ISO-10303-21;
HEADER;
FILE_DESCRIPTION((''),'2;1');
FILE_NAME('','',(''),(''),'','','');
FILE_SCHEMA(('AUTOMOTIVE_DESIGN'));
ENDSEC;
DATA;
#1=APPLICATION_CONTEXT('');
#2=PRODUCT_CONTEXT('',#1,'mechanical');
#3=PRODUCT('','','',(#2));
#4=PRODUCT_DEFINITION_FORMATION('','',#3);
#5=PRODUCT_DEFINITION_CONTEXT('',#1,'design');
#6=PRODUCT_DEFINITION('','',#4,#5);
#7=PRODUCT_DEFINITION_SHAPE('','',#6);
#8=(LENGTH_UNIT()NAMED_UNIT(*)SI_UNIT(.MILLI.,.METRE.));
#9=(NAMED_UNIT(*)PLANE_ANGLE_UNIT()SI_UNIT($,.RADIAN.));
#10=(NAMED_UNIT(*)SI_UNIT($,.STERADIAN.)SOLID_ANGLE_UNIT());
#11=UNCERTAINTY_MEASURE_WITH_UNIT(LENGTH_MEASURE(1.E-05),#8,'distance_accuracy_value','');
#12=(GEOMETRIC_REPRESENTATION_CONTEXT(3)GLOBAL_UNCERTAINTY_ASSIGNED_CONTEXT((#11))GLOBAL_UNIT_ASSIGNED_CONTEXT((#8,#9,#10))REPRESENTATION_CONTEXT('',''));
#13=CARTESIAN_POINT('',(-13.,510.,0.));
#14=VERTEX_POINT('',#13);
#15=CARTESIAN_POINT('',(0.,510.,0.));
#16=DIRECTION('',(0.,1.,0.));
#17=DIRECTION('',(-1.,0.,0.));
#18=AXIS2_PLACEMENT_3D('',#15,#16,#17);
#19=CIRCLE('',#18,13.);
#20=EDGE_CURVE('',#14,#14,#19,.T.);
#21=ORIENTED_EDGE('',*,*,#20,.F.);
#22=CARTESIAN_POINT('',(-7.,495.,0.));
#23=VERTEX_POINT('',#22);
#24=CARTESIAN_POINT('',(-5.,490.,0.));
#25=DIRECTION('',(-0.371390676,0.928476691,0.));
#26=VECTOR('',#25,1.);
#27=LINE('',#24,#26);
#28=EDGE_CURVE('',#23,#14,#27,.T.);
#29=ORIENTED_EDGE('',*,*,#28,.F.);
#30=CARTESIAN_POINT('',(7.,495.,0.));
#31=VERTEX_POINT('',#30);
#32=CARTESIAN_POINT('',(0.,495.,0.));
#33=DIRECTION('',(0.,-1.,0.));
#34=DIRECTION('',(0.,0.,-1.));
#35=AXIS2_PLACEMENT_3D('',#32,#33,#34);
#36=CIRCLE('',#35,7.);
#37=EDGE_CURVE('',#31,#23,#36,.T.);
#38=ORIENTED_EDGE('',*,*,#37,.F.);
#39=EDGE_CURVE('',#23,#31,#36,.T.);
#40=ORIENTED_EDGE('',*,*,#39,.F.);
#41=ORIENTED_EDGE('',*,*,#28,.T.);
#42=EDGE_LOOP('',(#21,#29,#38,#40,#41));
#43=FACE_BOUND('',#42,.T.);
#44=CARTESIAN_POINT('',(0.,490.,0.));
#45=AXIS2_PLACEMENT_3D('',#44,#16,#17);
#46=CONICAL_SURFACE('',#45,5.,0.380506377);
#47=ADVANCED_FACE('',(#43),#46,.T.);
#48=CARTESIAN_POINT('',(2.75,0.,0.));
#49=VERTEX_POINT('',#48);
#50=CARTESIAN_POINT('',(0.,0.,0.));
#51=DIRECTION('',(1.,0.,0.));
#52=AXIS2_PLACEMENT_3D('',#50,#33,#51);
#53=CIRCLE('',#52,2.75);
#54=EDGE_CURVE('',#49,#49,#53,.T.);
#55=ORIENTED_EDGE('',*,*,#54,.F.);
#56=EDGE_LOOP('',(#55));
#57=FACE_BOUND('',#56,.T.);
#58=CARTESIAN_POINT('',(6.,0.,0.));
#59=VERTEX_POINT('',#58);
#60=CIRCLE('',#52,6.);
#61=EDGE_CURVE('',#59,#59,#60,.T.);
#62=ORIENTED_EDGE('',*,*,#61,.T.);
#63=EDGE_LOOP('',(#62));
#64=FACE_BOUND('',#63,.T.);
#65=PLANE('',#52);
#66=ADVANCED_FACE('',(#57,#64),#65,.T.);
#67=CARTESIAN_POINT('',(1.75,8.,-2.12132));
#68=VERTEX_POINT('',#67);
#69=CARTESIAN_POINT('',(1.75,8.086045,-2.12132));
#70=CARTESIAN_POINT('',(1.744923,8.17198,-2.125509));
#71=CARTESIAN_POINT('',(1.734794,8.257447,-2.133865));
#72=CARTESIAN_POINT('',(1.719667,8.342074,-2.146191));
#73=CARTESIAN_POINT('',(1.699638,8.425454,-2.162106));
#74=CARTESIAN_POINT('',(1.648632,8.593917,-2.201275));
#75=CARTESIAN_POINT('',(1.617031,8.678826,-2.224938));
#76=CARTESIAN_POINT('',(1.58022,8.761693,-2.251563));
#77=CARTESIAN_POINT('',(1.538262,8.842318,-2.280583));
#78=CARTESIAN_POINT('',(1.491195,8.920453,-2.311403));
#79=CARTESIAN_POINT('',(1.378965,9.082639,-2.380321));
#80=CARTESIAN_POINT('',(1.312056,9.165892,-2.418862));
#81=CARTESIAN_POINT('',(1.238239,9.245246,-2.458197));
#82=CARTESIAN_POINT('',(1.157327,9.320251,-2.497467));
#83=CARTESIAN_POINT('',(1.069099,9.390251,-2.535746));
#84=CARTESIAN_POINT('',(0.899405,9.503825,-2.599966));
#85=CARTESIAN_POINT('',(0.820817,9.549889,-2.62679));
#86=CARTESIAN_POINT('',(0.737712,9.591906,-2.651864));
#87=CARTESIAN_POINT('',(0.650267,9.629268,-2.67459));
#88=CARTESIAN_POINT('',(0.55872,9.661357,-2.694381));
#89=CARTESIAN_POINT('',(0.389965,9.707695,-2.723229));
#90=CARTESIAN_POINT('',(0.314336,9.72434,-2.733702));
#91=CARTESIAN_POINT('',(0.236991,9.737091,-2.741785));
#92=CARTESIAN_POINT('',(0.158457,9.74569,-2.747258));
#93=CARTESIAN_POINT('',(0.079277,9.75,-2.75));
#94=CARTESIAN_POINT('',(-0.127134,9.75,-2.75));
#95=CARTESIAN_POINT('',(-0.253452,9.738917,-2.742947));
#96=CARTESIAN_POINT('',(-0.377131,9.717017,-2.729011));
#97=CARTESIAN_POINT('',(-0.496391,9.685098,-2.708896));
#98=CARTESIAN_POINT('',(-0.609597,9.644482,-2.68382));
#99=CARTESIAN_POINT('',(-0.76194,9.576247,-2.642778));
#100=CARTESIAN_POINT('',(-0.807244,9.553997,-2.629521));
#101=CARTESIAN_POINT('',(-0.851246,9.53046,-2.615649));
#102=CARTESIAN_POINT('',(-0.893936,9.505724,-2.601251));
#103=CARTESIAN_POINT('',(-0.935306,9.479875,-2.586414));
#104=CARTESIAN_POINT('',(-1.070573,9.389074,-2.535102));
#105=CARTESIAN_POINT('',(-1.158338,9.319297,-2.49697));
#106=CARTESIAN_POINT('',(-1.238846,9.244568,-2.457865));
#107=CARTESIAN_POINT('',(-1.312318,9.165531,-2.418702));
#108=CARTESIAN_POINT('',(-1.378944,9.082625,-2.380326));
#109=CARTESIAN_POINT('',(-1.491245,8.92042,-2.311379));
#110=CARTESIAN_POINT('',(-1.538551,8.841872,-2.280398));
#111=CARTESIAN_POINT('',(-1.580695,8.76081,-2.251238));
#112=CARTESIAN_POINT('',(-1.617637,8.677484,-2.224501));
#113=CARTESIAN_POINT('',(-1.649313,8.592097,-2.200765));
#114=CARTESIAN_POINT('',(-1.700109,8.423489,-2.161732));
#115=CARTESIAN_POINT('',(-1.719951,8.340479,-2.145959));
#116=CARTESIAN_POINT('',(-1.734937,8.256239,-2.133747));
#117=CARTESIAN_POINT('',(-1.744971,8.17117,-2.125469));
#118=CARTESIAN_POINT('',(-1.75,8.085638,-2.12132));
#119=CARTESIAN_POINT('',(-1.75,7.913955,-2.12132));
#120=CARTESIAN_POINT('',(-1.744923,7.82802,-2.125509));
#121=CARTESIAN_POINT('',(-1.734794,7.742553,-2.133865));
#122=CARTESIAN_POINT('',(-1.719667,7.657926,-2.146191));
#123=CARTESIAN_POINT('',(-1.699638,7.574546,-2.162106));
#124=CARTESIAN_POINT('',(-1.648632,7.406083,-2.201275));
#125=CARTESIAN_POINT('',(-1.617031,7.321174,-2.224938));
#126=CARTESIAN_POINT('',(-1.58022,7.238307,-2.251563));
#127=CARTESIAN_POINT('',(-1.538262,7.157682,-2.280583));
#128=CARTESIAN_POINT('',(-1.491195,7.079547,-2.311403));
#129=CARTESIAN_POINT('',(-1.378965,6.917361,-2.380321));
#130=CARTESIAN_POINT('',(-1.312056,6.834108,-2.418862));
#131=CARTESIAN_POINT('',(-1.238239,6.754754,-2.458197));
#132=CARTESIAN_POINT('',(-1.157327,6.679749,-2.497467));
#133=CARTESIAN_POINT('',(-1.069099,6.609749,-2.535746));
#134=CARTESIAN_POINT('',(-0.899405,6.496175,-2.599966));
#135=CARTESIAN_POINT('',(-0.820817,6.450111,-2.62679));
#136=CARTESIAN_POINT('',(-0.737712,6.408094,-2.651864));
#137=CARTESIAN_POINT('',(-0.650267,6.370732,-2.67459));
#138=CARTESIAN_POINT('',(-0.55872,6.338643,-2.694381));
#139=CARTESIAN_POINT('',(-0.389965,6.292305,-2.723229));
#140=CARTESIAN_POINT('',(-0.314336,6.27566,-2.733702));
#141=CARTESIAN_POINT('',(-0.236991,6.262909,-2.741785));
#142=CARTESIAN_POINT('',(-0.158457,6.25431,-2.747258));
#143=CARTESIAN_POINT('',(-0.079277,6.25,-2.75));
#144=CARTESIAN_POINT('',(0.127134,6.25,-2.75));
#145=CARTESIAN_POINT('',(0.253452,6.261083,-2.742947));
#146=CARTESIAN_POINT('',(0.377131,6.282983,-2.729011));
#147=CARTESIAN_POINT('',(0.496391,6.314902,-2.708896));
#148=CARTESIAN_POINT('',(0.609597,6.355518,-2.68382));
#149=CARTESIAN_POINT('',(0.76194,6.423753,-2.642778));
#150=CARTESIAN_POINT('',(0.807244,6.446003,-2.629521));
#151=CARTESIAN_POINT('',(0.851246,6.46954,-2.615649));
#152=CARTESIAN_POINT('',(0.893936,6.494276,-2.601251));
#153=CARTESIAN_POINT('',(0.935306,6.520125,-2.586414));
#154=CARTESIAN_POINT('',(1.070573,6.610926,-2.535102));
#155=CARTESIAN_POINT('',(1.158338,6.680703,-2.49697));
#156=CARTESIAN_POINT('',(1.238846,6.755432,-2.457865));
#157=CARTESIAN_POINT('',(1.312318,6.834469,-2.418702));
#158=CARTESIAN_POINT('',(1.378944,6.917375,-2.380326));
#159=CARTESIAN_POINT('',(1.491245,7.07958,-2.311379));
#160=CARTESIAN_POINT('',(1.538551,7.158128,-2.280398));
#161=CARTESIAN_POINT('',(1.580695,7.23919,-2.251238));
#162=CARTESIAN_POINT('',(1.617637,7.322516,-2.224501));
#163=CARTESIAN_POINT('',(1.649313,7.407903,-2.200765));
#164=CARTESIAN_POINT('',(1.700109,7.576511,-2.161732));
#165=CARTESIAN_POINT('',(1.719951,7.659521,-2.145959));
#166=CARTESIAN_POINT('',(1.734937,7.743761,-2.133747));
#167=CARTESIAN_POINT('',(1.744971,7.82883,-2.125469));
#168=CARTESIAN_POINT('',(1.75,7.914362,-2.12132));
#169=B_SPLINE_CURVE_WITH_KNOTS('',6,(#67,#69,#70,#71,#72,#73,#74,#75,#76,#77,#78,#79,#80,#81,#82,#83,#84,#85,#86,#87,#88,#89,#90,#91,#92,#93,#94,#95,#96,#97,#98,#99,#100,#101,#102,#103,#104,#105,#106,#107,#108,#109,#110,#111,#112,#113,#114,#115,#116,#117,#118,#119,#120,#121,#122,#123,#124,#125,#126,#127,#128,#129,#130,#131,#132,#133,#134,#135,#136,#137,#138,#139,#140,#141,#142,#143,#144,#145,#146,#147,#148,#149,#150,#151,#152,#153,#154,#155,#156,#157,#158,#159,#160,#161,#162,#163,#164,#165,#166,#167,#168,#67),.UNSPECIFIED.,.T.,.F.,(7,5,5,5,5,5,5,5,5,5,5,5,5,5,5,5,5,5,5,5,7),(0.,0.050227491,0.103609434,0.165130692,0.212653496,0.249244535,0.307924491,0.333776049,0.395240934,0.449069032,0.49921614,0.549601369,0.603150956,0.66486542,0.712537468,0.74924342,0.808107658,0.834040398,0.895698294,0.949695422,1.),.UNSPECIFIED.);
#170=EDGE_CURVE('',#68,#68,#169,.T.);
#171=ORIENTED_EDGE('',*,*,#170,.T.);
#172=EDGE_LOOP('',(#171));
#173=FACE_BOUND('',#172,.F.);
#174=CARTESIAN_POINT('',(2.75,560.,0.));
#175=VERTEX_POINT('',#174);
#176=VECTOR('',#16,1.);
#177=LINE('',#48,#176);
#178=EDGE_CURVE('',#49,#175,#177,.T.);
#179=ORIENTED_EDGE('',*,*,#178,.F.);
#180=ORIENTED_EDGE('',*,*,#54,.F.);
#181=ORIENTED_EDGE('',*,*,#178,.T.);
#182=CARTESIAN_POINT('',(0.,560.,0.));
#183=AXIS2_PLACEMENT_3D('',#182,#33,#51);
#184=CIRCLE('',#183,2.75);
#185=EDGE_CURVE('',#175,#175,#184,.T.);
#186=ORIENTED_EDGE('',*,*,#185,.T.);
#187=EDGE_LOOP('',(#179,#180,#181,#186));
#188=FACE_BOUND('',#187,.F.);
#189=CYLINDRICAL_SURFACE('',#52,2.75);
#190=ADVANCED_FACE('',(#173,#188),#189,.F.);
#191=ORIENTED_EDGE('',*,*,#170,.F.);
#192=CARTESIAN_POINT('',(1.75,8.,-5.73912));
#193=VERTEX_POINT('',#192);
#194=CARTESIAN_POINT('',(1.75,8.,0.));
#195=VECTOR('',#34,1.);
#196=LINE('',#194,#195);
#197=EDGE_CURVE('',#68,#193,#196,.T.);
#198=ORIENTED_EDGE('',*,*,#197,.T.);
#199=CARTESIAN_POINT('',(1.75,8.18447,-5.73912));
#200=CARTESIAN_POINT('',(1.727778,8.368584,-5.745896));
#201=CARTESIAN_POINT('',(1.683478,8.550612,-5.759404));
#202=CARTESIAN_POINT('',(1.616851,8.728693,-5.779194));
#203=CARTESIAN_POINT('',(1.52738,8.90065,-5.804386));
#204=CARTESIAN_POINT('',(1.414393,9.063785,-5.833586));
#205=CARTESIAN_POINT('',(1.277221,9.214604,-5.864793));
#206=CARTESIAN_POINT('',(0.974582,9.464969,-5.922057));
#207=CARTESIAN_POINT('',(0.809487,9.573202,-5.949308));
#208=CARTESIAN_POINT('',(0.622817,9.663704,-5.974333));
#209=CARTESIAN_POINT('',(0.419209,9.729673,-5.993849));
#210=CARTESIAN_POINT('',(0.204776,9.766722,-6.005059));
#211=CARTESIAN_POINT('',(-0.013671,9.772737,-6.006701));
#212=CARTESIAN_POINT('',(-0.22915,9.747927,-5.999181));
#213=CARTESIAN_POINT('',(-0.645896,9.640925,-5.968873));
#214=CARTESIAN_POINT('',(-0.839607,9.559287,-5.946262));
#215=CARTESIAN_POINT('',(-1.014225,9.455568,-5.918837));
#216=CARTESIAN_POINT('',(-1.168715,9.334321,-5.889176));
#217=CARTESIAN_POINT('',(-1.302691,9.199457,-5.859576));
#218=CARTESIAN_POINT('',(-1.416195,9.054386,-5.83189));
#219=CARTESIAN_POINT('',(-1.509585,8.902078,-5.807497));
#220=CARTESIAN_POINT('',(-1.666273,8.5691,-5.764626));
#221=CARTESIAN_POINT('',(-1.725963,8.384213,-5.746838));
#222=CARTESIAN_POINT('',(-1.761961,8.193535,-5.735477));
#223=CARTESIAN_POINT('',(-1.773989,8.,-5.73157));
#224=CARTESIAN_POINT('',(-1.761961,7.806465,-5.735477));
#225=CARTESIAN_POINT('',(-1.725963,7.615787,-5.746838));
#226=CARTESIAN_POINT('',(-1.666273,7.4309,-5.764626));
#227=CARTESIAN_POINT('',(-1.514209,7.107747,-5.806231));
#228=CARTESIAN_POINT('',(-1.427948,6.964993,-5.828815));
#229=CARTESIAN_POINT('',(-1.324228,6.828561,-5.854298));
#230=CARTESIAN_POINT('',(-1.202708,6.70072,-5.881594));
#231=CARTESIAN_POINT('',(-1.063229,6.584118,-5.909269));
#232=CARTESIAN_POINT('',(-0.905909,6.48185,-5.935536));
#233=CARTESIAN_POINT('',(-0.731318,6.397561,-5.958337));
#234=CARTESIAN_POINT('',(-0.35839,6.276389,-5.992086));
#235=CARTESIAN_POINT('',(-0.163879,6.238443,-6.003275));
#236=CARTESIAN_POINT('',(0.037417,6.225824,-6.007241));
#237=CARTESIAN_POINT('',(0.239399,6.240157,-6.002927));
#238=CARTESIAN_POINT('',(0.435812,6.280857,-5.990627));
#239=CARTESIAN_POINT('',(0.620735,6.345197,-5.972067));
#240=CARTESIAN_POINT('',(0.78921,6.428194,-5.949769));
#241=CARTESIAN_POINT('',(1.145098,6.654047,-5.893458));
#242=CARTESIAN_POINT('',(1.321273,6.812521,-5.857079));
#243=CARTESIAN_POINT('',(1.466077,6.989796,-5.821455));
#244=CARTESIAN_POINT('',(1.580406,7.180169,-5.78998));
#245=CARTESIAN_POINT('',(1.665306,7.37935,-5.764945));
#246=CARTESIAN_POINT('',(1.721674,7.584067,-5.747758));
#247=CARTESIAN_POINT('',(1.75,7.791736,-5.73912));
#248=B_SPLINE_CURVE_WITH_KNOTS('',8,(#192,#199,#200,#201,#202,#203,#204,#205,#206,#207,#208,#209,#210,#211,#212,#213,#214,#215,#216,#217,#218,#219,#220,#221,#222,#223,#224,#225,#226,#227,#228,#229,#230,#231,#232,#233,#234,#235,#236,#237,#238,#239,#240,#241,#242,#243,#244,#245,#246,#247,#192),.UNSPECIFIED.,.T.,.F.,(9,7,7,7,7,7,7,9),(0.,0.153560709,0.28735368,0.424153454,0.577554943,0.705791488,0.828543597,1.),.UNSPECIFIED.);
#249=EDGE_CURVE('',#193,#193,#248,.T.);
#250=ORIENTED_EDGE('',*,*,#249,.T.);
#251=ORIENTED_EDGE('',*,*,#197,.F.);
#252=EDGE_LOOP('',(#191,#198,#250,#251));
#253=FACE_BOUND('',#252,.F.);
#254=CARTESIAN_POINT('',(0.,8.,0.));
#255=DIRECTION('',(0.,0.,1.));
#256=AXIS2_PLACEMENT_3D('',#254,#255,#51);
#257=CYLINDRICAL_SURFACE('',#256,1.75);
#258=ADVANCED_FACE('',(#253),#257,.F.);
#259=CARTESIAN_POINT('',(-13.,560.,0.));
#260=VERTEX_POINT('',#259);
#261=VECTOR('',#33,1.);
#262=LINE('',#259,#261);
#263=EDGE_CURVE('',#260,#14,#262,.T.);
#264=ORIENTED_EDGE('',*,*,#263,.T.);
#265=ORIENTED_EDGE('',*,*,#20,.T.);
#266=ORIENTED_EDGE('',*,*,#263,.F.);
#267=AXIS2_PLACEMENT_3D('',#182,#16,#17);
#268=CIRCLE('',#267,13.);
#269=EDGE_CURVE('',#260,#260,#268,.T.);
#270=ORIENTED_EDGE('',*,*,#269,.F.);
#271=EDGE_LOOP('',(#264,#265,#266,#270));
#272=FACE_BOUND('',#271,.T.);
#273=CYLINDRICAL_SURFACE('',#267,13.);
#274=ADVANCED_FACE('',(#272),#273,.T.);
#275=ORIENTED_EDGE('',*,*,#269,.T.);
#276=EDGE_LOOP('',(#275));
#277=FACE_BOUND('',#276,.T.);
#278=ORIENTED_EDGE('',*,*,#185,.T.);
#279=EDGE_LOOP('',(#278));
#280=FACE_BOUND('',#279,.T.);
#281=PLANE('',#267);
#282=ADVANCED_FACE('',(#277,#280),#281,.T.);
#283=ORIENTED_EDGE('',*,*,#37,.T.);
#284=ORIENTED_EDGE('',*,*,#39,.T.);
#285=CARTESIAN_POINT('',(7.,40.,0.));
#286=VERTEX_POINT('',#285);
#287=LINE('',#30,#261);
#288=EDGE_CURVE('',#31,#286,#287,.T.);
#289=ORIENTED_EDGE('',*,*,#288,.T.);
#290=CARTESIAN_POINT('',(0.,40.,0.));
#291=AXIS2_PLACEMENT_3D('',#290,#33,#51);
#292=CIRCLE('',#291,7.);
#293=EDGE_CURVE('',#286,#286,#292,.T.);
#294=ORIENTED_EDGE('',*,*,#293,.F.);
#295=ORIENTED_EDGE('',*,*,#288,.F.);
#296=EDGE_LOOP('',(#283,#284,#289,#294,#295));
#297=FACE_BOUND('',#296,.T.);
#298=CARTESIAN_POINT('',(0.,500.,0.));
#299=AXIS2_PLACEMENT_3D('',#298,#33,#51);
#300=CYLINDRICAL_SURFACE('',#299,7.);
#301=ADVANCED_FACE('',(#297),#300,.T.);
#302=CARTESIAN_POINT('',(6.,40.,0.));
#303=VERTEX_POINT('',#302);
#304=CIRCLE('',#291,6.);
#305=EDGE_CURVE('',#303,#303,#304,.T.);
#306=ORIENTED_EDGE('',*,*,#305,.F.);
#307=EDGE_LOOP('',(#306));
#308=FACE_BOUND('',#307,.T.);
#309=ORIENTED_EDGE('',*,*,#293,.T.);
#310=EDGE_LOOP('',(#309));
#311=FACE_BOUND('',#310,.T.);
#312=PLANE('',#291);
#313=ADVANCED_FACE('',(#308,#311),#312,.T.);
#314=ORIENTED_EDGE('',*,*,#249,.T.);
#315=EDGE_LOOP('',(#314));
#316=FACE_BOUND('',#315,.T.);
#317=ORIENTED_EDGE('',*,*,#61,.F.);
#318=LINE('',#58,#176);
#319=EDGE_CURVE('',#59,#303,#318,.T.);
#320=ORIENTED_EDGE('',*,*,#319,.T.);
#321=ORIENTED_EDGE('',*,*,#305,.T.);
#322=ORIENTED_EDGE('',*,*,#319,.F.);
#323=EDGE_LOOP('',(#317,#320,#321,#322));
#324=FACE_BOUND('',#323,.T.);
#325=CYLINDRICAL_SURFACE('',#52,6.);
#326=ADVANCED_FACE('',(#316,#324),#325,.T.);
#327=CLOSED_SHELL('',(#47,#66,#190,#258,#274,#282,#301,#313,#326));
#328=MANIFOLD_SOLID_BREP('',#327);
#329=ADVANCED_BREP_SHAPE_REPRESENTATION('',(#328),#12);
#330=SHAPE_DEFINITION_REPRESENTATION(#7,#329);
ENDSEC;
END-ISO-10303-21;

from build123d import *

# Parameters (mm, degrees)
F0_R         = 7
F1_DEPTH     = 560
F2_R         = 7
F2_R_2       = 6
F3_DEPTH     = 40
F4_R         = 2.75
F5_DEPTH     = 560.001
F6_R         = 1.75
F7_DEPTH     = 10
F8_R         = 13
F8_R_2       = 7
F9_DEPTH     = 70
F10_S5_R     = 7
F10_T6_DEPTH = 22


# Not quite as in the source:
# - a fillet or chamfer that OpenCascade refuses, or shapes differently, is made with other operations: its cross-section is extruded or revolved along the edge and cut away or added


with BuildPart() as f1:
    # F0 (on Front) → F1 (new body)
    with BuildSketch(Plane.XZ):
        Circle(F0_R)
    extrude(amount=-F1_DEPTH)

    # F2 (on face) → F3 (cut)
    with BuildSketch(Plane.XZ):
        Circle(F2_R)
        Circle(F2_R_2, mode=Mode.SUBTRACT)
    extrude(amount=-F3_DEPTH, mode=Mode.SUBTRACT)

    # F4 (on face) → F5 (cut, through all)
    with BuildSketch(Plane.XZ):
        Circle(F4_R)
    extrude(amount=-F5_DEPTH, mode=Mode.SUBTRACT)

    # F6 (on Top) → F7 (cut)
    with BuildSketch(Plane.XY):
        with Locations((0, 8)):
            Circle(F6_R)
    extrude(amount=-F7_DEPTH, mode=Mode.SUBTRACT)

    # F8 (on face) → F9 (join)
    with BuildSketch(Plane(origin=(0, 560, 0), x_dir=(-1, 0, 0), z_dir=(0, 1, 0))):
        Circle(F8_R)
        Circle(F8_R_2, mode=Mode.SUBTRACT)
    extrude(amount=-F9_DEPTH)

    # F10: chamfer of 20 x 8 on 1 edges, made by hand


with BuildPart() as f10_tool2:
    # F10_s3 → F10_t4 (revolve)
    with BuildSketch(Plane.XY):
        Polygon((-5, 490), (-13, 510), (-13, 490), align=None)
    revolve(axis=Axis((0, 490, 0), (0, 1, 0)))

    # F10_s5 → F10_t6 (cut, symmetric)
    with BuildSketch(Plane.XZ.offset(-500)):
        Circle(F10_S5_R)
    extrude(amount=F10_T6_DEPTH, both=True, mode=Mode.SUBTRACT)


with BuildPart() as f1_1:
    add(f1.part)

    # F10_t1: cut F10_tool2
    add(f10_tool2.part, mode=Mode.SUBTRACT)


solid = f1_1.part
